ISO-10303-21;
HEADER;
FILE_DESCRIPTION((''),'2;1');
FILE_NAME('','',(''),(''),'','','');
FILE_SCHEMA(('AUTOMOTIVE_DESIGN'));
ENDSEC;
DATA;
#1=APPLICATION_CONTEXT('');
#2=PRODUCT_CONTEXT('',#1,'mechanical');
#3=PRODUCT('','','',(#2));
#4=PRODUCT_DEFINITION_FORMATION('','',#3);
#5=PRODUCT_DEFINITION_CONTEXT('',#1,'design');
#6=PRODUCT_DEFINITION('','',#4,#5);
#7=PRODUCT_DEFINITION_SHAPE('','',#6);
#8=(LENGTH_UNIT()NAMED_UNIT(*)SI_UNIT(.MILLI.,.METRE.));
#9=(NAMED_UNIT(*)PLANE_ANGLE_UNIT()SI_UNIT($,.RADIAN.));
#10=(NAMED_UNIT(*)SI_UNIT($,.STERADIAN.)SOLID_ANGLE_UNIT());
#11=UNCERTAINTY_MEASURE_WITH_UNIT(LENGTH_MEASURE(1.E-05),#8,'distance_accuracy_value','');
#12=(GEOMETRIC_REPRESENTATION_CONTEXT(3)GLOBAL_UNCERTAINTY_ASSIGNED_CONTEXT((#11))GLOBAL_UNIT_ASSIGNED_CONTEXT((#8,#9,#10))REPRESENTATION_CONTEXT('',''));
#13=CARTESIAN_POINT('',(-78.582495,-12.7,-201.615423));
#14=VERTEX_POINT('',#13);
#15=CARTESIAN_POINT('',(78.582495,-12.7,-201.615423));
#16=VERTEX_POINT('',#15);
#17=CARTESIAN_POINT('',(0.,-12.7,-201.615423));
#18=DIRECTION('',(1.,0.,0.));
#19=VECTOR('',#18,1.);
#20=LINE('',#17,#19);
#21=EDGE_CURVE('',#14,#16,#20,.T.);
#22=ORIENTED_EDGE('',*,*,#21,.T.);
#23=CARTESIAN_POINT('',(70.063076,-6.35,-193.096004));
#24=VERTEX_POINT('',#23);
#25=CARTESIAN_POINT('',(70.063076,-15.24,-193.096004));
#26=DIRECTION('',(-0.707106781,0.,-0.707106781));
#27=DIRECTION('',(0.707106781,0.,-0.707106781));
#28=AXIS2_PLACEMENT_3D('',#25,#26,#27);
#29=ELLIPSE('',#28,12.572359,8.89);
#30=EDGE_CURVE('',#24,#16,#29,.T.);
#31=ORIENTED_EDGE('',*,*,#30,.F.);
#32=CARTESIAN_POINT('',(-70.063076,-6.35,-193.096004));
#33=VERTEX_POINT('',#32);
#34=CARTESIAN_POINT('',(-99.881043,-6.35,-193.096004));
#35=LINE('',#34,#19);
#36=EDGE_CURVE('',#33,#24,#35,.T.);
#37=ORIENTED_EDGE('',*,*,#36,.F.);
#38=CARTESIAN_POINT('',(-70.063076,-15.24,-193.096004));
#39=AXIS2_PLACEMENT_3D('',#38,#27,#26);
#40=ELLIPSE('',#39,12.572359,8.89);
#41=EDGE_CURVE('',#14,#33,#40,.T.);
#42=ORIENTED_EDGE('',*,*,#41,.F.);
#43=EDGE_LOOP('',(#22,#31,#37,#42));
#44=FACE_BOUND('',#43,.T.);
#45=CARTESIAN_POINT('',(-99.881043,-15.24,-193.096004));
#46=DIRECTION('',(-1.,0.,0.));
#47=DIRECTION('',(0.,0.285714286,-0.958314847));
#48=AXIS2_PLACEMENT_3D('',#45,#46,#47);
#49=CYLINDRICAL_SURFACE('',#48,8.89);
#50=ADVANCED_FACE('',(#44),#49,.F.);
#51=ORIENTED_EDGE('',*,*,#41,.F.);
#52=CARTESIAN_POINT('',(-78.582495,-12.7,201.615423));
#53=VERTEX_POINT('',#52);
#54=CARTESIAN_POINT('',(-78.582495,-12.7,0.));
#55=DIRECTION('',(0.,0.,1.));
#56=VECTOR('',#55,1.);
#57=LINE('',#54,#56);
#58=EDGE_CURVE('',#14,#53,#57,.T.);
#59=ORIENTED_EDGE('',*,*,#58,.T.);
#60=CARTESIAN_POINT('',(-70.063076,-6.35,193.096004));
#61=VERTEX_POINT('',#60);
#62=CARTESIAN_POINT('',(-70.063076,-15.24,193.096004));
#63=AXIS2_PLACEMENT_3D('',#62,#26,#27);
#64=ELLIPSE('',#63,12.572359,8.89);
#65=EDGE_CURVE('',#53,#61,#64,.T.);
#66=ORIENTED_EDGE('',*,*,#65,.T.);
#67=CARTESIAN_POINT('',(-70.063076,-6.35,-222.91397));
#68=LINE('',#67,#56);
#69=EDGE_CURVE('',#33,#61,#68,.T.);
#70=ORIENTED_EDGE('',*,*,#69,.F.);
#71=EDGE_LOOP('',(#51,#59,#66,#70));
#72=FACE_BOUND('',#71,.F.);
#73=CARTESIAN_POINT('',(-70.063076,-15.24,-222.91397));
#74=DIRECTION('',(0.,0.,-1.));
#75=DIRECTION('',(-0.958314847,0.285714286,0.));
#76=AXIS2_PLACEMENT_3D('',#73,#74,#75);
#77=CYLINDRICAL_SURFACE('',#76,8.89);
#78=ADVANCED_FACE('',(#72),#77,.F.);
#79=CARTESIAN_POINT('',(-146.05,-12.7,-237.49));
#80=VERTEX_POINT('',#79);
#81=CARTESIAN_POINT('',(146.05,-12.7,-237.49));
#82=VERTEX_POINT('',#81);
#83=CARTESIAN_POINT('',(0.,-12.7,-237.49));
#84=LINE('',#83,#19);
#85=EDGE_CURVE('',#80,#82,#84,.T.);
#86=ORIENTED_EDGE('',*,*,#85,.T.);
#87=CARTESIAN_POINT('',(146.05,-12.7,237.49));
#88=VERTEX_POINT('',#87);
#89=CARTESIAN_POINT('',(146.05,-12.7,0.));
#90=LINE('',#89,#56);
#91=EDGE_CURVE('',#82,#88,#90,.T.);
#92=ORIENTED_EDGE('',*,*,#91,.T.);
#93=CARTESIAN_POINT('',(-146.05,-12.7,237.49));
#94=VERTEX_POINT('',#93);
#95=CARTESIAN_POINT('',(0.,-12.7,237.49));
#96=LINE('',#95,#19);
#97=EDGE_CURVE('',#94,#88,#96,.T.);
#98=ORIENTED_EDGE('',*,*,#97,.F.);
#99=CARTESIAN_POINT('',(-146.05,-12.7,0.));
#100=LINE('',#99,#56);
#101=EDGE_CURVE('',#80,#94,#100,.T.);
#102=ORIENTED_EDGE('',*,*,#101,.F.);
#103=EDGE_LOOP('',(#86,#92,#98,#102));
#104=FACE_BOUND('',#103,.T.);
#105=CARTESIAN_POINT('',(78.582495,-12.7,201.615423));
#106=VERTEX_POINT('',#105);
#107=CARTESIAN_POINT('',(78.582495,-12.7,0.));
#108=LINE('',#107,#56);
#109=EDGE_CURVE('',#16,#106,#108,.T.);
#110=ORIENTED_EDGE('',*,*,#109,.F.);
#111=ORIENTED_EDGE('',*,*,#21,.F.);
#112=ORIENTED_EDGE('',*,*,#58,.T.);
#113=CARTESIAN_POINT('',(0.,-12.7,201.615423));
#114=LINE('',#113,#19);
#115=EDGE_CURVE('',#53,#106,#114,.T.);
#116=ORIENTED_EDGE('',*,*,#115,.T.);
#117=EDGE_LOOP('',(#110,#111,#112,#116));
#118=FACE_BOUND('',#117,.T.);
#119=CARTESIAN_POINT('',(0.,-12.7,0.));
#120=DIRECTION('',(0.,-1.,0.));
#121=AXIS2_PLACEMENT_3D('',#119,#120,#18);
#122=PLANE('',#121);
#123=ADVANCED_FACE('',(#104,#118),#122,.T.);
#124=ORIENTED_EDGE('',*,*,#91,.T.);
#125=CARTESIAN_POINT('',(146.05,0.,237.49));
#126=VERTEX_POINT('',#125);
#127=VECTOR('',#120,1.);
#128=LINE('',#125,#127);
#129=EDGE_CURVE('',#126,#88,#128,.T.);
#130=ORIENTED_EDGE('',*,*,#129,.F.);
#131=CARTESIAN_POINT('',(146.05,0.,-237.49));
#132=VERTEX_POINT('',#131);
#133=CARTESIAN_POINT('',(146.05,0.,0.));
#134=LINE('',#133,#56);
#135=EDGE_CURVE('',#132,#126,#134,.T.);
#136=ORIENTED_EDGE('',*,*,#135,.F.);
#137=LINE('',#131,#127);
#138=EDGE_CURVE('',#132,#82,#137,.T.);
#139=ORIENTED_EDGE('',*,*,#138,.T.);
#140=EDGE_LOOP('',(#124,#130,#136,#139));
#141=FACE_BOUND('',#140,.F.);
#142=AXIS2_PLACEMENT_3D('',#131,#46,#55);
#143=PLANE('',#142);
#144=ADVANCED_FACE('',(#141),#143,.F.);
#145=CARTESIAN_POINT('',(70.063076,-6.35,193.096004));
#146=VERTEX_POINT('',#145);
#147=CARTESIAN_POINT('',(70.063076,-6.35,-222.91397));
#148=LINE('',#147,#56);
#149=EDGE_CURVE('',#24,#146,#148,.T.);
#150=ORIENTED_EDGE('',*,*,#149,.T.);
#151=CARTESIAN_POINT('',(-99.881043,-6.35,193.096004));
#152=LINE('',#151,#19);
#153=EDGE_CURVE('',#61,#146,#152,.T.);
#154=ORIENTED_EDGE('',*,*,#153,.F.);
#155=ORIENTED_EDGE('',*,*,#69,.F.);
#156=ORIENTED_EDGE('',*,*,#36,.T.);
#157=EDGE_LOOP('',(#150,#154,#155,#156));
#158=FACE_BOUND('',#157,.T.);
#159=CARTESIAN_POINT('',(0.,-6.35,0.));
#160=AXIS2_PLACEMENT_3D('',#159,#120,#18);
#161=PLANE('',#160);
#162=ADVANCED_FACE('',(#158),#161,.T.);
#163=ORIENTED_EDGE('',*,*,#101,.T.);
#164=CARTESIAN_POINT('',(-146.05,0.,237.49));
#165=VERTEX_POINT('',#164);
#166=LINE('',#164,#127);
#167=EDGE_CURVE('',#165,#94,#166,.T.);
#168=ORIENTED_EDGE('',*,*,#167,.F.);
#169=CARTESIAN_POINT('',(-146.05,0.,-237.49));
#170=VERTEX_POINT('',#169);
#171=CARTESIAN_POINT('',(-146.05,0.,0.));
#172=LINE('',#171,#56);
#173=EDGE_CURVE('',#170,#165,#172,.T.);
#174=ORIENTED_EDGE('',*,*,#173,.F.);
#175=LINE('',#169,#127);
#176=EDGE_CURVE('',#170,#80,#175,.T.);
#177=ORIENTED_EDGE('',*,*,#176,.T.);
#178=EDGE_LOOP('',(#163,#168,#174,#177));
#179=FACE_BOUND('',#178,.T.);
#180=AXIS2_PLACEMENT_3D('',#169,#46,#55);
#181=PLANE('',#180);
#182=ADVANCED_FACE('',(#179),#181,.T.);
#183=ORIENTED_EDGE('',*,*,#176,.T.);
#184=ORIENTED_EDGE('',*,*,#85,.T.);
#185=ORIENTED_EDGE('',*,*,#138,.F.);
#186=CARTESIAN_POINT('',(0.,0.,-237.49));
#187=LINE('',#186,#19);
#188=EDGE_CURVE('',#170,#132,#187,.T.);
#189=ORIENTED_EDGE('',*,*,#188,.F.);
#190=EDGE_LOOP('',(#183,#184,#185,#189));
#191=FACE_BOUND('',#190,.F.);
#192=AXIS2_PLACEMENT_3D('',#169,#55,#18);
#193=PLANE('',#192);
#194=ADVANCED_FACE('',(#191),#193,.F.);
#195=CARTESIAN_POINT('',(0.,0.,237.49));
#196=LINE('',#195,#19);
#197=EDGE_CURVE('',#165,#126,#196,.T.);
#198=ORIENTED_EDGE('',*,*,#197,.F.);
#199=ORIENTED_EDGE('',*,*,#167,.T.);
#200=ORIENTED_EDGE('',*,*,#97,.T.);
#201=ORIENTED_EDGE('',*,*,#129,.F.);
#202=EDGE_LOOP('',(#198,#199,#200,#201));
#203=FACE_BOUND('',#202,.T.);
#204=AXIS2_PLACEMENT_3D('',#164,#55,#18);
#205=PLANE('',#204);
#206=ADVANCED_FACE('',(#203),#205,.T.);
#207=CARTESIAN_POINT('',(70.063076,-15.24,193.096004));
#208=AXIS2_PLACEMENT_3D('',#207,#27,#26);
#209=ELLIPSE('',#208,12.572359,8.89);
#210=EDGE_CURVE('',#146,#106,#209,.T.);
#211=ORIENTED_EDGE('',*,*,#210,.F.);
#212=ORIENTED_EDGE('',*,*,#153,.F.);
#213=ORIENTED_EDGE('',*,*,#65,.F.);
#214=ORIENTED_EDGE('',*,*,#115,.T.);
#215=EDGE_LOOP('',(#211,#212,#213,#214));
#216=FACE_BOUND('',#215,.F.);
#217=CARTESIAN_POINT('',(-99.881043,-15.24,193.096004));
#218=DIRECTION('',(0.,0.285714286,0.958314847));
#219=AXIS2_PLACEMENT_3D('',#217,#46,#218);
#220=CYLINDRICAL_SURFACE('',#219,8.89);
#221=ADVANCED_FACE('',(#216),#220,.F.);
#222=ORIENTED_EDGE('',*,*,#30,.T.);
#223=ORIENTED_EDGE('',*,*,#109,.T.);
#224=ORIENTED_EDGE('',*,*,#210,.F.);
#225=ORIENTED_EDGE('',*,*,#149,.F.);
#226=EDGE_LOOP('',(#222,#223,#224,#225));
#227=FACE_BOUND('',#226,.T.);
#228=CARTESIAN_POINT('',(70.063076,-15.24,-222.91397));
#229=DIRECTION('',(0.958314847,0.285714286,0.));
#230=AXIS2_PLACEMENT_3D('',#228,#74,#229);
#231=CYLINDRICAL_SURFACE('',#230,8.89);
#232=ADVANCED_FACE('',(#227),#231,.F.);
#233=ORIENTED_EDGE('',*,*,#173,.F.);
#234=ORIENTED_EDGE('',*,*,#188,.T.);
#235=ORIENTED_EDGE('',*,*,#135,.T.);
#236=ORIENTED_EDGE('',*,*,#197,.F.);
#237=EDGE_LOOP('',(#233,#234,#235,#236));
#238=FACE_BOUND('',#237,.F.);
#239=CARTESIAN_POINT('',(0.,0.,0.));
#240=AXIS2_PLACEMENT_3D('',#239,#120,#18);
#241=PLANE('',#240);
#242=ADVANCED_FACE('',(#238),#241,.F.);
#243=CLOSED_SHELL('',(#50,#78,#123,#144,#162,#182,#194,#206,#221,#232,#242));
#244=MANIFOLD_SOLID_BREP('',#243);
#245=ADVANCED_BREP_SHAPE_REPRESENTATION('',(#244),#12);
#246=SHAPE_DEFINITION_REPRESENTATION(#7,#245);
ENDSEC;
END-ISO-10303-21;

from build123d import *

# Parameters (mm, degrees)
F0_W        = 292.1
F0_H        = 474.98
F1_DEPTH    = 12.7
F2_W        = 157.1649909019
F2_H        = 403.2308459282
F3_DEPTH    = 6.35
F4_T1_DEPTH = 445.8279408996
F4_T3_DEPTH = 199.7620858733


# Not quite as in the source:
# - a fillet or chamfer that OpenCascade refuses, or shapes differently, is made with other operations: its cross-section is extruded or revolved along the edge and cut away or added


with BuildPart() as f1:
    # F0 (on Front) → F1 (new body)
    with BuildSketch(Plane.XZ):
        Rectangle(F0_W, F0_H)
    extrude(amount=F1_DEPTH)

    # F2 (on face) → F3 (cut)
    with BuildSketch(Plane.XZ.offset(12.7)):
        Rectangle(F2_W, F2_H)
    extrude(amount=-F3_DEPTH, mode=Mode.SUBTRACT)

    # F4: fillet of radius 8.89 on 4 edges, made by hand

    # F4_s2 → F4_t1 (join)
    with BuildSketch(Plane.XY.offset(-222.9139704498)):
        with BuildLine():
            ThreePointArc((78.582495451, -12.7), (75.3758676252, -8.1121426782), (70.0630764567, -6.35))
            Line((70.0630764567, -6.35), (78.582495451, -6.35))
            Line((78.582495451, -6.35), (78.582495451, -12.7))
        make_face()
        with BuildLine():
            ThreePointArc((-78.582495451, -12.7), (-75.3758676252, -8.1121426782), (-70.0630764567, -6.35))
            Line((-70.0630764567, -6.35), (-78.582495451, -6.35))
            Line((-78.582495451, -6.35), (-78.582495451, -12.7))
        make_face()
    extrude(amount=F4_T1_DEPTH)

    # F4_s4 → F4_t3 (join)
    with BuildSketch(Plane.YZ.offset(-99.8810429367)):
        with BuildLine():
            ThreePointArc((-12.7, 201.6154229641), (-8.1121426782, 198.4087951383), (-6.35, 193.0960039698))
            Line((-6.35, 193.0960039698), (-6.35, 201.6154229641))
            Line((-6.35, 201.6154229641), (-12.7, 201.6154229641))
        make_face()
        with BuildLine():
            ThreePointArc((-12.7, -201.6154229641), (-8.1121426782, -198.4087951383), (-6.35, -193.0960039698))
            Line((-6.35, -193.0960039698), (-6.35, -201.6154229641))
            Line((-6.35, -201.6154229641), (-12.7, -201.6154229641))
        make_face()
    extrude(amount=F4_T3_DEPTH)


solid = f1.part
